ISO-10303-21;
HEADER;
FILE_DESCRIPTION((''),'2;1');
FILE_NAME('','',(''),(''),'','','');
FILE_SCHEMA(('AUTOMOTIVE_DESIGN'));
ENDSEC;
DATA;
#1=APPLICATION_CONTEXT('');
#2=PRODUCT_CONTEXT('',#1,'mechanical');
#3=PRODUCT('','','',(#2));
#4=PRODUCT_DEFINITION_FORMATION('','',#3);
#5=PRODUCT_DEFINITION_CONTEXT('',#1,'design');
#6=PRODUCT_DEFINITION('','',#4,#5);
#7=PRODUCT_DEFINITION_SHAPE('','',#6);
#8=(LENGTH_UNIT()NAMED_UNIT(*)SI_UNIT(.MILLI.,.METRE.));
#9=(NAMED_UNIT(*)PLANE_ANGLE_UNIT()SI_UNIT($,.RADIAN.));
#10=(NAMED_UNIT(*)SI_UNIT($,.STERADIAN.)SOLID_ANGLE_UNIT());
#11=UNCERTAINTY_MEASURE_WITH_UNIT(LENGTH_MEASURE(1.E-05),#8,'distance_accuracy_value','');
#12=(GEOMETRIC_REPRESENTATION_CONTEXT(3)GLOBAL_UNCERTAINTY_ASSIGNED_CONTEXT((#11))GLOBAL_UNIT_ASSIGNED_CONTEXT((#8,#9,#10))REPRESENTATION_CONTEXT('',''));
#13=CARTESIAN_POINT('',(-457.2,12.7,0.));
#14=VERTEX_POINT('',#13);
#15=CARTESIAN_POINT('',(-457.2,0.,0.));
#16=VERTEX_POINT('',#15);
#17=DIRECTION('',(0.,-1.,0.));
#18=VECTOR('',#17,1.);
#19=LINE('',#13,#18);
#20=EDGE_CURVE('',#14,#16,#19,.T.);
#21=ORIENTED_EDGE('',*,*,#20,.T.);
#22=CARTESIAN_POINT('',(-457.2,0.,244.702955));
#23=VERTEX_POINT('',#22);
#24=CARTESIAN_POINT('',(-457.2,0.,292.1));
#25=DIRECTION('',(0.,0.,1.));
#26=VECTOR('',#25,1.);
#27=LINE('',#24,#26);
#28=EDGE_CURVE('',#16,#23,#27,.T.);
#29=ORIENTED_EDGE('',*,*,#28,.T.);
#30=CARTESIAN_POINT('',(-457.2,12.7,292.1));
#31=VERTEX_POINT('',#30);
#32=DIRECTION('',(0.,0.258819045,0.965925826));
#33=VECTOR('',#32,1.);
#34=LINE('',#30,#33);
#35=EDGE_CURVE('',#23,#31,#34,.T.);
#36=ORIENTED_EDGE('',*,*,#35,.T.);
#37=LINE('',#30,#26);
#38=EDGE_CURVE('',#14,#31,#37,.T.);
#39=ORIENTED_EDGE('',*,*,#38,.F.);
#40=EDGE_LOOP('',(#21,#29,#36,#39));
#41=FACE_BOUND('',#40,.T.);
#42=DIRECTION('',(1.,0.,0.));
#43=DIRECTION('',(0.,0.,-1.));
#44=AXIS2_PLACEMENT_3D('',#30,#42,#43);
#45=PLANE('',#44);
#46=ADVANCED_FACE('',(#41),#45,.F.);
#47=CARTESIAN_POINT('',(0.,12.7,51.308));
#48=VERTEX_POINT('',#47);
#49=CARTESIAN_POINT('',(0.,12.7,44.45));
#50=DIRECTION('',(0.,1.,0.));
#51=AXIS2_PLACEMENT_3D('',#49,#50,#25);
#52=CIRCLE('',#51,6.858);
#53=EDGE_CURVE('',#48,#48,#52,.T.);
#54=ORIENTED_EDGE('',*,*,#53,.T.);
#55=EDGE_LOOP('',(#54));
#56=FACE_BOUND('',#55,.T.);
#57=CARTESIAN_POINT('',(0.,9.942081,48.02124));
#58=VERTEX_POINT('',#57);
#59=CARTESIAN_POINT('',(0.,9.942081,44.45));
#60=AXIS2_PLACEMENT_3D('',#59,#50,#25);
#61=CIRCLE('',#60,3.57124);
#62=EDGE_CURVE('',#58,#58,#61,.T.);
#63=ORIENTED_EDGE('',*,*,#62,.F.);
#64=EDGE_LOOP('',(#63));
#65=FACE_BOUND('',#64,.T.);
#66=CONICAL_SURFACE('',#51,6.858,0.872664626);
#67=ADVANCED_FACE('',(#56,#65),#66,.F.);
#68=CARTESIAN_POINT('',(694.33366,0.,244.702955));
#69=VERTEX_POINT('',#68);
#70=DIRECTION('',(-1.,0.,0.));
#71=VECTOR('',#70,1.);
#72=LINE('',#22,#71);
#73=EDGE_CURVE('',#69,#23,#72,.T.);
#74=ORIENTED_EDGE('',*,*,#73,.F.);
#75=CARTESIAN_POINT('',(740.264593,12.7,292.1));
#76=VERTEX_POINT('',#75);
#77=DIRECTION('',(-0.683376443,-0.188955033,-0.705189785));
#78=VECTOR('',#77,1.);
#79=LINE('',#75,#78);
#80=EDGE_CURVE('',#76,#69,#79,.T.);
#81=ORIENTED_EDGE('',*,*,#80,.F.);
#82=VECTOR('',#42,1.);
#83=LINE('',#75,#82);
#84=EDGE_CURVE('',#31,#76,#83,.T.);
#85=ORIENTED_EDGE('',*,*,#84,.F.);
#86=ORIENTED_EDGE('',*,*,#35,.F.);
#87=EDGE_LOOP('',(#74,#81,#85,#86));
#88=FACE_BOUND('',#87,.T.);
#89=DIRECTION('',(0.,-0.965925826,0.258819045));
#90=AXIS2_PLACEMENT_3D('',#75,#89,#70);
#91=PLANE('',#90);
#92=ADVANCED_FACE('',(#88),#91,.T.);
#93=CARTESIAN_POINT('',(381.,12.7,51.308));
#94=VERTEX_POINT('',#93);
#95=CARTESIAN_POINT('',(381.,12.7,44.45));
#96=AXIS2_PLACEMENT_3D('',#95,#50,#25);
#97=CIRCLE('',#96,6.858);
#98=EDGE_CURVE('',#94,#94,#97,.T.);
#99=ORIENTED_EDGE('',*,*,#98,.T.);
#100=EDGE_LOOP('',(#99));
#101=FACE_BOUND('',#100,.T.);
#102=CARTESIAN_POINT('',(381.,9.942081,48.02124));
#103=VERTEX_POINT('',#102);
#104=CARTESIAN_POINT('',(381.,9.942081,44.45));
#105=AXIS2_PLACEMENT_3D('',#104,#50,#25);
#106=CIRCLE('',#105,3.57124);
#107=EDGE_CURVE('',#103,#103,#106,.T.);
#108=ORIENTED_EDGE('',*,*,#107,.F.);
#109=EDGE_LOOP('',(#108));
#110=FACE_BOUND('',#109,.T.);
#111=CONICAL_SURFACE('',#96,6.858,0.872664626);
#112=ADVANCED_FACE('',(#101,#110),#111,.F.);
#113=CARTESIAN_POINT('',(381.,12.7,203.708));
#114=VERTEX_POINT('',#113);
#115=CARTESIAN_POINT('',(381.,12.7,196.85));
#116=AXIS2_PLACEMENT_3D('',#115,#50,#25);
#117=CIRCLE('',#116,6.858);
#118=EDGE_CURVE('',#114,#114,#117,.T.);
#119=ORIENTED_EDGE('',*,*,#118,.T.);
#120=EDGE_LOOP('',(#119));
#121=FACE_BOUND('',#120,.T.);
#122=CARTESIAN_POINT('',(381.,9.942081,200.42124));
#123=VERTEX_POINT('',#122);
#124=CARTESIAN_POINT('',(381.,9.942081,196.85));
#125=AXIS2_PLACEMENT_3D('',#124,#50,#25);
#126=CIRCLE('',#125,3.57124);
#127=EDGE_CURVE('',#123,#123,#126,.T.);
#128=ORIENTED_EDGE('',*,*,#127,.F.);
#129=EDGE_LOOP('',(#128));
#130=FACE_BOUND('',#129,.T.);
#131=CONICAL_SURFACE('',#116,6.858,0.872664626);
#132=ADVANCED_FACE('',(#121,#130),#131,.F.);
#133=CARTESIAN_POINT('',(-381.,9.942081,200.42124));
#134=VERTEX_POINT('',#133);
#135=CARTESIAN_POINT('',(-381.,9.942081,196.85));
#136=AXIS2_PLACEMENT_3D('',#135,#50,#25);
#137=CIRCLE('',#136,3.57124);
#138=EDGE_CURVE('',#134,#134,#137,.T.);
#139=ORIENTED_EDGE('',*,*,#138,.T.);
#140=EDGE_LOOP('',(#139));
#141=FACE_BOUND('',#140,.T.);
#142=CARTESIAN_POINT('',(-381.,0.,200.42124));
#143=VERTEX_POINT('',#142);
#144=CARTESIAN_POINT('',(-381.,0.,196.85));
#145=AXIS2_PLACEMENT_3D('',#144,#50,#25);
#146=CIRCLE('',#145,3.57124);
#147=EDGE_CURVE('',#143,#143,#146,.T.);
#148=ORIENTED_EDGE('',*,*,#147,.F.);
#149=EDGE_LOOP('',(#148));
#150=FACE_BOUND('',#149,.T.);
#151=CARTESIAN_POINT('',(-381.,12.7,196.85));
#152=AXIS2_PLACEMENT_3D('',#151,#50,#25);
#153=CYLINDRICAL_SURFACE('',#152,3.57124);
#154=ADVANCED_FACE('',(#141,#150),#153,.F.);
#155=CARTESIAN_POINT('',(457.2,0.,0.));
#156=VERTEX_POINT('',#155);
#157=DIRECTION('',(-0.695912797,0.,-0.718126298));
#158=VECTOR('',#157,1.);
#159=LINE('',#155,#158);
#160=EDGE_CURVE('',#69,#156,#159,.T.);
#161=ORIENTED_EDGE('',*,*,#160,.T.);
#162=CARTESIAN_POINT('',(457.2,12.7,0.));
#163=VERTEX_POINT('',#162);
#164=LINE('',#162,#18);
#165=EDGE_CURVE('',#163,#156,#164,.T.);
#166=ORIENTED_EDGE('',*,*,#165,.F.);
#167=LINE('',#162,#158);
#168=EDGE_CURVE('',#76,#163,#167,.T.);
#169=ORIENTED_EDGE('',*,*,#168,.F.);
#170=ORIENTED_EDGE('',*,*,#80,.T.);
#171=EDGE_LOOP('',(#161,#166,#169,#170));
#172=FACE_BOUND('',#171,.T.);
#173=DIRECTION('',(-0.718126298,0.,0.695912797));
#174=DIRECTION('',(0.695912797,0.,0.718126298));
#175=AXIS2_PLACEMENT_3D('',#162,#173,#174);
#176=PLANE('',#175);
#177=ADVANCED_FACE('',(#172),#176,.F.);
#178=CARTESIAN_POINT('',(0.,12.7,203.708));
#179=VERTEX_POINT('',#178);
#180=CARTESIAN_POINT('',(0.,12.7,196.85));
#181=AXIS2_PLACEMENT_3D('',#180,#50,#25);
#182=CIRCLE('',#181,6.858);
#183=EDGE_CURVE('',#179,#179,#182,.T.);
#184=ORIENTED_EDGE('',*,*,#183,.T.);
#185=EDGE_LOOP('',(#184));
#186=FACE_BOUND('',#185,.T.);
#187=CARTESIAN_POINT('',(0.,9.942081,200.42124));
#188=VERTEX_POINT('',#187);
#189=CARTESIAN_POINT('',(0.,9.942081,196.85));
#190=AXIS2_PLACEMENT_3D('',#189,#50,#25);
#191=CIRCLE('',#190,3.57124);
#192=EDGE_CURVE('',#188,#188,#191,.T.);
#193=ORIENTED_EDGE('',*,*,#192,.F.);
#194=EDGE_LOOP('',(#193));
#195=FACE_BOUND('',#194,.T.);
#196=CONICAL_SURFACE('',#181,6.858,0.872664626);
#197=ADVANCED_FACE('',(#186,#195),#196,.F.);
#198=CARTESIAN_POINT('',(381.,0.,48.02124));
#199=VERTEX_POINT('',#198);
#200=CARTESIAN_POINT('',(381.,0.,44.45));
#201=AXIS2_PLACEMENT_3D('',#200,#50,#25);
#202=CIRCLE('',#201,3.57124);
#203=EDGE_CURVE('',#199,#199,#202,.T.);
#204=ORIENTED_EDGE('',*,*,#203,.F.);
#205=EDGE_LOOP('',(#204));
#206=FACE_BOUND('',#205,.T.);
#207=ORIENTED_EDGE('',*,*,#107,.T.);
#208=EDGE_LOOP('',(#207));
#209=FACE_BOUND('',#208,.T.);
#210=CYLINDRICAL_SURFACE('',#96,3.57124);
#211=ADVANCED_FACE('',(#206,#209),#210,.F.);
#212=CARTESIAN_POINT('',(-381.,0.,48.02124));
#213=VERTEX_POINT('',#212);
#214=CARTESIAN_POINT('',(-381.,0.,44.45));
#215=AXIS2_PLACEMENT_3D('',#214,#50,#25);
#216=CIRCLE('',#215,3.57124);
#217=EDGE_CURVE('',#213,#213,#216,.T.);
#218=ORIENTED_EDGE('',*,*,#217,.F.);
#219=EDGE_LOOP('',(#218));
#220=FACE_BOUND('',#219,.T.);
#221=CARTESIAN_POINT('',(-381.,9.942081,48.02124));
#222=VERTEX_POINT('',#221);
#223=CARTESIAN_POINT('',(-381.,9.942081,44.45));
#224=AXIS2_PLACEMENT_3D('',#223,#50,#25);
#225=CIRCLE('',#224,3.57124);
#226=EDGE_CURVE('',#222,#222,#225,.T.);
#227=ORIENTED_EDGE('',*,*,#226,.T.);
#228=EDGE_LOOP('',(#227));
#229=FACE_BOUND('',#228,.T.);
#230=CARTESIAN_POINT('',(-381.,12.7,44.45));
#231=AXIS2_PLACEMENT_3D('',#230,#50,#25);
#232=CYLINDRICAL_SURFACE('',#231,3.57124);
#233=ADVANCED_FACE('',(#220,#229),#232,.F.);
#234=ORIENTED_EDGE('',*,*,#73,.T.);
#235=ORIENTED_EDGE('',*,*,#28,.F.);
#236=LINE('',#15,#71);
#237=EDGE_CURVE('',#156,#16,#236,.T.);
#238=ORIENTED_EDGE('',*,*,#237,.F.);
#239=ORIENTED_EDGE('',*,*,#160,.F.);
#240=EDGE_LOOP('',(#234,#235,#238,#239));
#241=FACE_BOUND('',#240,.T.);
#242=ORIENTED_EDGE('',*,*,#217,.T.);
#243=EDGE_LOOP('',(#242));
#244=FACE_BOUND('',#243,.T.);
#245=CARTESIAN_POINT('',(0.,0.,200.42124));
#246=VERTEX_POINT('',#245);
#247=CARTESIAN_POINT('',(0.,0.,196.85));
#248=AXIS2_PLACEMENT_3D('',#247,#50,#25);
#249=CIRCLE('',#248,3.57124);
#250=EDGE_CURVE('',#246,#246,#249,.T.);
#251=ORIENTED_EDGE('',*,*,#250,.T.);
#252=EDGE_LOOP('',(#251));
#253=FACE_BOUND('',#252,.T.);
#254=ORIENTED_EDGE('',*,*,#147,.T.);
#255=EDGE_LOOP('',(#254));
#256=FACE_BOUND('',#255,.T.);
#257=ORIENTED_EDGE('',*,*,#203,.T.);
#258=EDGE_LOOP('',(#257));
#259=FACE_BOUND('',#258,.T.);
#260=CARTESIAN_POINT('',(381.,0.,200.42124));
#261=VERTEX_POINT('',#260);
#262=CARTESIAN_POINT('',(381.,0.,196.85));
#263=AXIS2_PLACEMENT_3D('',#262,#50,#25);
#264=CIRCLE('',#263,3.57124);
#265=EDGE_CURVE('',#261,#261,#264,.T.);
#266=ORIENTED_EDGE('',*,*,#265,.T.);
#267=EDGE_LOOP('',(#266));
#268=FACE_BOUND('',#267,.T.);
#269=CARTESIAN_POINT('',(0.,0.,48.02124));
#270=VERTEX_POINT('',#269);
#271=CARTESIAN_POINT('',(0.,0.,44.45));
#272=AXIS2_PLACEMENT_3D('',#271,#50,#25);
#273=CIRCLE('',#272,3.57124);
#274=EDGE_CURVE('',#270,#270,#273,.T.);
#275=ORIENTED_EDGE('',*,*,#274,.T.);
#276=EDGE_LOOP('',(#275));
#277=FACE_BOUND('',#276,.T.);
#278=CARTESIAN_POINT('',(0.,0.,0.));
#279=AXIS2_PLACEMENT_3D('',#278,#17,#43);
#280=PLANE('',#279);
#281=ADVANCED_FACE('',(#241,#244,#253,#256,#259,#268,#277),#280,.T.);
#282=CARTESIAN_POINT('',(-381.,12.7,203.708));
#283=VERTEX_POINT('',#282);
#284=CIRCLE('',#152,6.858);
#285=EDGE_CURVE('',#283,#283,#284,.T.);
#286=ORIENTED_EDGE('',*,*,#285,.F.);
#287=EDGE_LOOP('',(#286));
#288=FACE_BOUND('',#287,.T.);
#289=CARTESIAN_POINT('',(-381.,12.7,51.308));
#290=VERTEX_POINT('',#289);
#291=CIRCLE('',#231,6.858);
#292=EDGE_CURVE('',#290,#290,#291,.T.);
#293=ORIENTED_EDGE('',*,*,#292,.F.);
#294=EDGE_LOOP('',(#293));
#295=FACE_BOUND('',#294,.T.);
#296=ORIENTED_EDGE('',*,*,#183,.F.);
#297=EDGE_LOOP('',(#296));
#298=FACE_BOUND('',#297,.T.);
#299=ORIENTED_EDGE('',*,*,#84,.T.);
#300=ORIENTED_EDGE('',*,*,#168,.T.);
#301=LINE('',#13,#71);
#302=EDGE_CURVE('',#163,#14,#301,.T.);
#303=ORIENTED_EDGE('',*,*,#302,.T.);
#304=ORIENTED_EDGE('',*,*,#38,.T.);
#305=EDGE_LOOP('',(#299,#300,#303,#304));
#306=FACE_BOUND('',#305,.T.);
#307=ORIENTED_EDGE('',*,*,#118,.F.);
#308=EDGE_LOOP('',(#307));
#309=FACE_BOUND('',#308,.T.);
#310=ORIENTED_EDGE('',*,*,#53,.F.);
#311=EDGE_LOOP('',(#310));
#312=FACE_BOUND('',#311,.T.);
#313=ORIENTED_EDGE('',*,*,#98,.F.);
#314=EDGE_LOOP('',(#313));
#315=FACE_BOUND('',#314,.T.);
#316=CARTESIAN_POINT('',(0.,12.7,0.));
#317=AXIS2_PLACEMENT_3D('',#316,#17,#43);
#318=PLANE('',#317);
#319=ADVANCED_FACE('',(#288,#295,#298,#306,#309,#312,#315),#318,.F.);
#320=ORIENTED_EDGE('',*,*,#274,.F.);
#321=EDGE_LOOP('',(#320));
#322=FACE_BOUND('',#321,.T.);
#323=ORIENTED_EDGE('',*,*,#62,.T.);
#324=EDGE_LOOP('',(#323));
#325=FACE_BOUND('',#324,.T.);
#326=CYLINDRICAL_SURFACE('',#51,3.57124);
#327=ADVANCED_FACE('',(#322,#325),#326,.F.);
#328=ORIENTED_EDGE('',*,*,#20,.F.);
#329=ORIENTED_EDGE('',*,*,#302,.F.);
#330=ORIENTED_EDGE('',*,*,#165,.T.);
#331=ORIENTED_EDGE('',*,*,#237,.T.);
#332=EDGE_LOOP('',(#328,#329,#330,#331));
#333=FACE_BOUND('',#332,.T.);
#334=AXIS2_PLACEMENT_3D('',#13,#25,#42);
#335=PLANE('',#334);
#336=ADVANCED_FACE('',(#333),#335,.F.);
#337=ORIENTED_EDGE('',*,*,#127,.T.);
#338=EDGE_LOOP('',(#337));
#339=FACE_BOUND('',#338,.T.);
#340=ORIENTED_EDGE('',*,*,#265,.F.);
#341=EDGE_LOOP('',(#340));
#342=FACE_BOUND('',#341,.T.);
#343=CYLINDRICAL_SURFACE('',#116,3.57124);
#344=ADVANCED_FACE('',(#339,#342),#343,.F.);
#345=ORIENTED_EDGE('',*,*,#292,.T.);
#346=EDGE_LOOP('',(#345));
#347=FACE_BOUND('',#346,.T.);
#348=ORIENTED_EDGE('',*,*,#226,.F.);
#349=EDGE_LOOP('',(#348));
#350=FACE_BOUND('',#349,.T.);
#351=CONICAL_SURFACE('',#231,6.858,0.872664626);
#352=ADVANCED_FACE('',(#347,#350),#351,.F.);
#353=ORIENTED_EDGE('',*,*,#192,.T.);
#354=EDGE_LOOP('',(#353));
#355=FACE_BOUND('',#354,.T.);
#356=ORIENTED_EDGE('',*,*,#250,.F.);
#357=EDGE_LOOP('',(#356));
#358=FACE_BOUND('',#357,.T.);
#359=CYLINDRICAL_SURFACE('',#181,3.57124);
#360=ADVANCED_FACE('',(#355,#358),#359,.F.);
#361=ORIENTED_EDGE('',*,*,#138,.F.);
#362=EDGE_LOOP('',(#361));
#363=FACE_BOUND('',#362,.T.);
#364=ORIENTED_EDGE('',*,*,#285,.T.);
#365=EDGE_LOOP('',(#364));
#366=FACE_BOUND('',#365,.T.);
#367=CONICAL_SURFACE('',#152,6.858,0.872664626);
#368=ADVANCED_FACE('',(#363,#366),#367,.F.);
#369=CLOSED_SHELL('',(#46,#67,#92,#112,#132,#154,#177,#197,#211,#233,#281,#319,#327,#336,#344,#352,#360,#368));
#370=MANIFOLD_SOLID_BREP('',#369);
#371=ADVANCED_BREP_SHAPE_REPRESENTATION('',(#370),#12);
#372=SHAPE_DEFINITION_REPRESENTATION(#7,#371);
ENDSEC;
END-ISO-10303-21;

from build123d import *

# Parameters (mm, degrees)
BOSS_EXTRUDE1_DEPTH                                 = 12.7
CHAMFER1_SIZE2                                      = 47.397045256
CHAMFER1_SIZE                                       = 12.7
CSK_FOR_1_4_FLAT_HEAD_MACHINE_SCREW_100_D           = 7.14248
CSK_FOR_1_4_FLAT_HEAD_MACHINE_SCREW_100_CSINK_D     = 13.716
CSK_FOR_1_4_FLAT_HEAD_MACHINE_SCREW_100_CSINK_ANGLE = 100
LPATTERN1_COUNT                                     = 3
LPATTERN1_PITCH                                     = 381


with BuildPart() as part:
    # Sketch1 → Boss-Extrude1 (new body)
    with BuildSketch(Plane(origin=(0, 0, 0), x_dir=(1, 0, 0), z_dir=(0, 1, 0))):
        Polygon((-457.2, 0), (457.2, 0), (740.264592562, -292.1), (-457.2, -292.1), align=None)
    extrude(amount=BOSS_EXTRUDE1_DEPTH)

    # Chamfer1
    chamfer1_edges = [part.edges().sort_by_distance(p)[0] for p in [
        (141.532296281, 0, 292.1),
    ]]
    chamfer1_side = [part.faces().sort_by_distance(p)[0] for p in [
        (141.532296281, 0.254, 292.1),
    ]]
    chamfer(chamfer1_edges, length=CHAMFER1_SIZE - 0.0001, length2=CHAMFER1_SIZE2 - 0.0001, reference=chamfer1_side[0])  # a hair under: the kernel refuses the full size

    # CSK for 1/4 Flat Head Machine Screw (100)1 (through all)
    with Locations(Plane(origin=(0, 12.7, 0), x_dir=(1, 0, 0), z_dir=(0, 1, 0))):
        with Locations((-381, -44.45), (-381, -196.85)):
            csk_for_1_4_flat_head_machine_screw_100 = CounterSinkHole(CSK_FOR_1_4_FLAT_HEAD_MACHINE_SCREW_100_D / 2, CSK_FOR_1_4_FLAT_HEAD_MACHINE_SCREW_100_CSINK_D / 2, counter_sink_angle=CSK_FOR_1_4_FLAT_HEAD_MACHINE_SCREW_100_CSINK_ANGLE)

    # LPattern1: CSK for 1/4 Flat Head Machine Screw (100)1 ×3
    with Locations(*[(i * LPATTERN1_PITCH, 0, 0) for i in range(1, LPATTERN1_COUNT)]):
        add(csk_for_1_4_flat_head_machine_screw_100, mode=Mode.SUBTRACT)


solid = part.part
